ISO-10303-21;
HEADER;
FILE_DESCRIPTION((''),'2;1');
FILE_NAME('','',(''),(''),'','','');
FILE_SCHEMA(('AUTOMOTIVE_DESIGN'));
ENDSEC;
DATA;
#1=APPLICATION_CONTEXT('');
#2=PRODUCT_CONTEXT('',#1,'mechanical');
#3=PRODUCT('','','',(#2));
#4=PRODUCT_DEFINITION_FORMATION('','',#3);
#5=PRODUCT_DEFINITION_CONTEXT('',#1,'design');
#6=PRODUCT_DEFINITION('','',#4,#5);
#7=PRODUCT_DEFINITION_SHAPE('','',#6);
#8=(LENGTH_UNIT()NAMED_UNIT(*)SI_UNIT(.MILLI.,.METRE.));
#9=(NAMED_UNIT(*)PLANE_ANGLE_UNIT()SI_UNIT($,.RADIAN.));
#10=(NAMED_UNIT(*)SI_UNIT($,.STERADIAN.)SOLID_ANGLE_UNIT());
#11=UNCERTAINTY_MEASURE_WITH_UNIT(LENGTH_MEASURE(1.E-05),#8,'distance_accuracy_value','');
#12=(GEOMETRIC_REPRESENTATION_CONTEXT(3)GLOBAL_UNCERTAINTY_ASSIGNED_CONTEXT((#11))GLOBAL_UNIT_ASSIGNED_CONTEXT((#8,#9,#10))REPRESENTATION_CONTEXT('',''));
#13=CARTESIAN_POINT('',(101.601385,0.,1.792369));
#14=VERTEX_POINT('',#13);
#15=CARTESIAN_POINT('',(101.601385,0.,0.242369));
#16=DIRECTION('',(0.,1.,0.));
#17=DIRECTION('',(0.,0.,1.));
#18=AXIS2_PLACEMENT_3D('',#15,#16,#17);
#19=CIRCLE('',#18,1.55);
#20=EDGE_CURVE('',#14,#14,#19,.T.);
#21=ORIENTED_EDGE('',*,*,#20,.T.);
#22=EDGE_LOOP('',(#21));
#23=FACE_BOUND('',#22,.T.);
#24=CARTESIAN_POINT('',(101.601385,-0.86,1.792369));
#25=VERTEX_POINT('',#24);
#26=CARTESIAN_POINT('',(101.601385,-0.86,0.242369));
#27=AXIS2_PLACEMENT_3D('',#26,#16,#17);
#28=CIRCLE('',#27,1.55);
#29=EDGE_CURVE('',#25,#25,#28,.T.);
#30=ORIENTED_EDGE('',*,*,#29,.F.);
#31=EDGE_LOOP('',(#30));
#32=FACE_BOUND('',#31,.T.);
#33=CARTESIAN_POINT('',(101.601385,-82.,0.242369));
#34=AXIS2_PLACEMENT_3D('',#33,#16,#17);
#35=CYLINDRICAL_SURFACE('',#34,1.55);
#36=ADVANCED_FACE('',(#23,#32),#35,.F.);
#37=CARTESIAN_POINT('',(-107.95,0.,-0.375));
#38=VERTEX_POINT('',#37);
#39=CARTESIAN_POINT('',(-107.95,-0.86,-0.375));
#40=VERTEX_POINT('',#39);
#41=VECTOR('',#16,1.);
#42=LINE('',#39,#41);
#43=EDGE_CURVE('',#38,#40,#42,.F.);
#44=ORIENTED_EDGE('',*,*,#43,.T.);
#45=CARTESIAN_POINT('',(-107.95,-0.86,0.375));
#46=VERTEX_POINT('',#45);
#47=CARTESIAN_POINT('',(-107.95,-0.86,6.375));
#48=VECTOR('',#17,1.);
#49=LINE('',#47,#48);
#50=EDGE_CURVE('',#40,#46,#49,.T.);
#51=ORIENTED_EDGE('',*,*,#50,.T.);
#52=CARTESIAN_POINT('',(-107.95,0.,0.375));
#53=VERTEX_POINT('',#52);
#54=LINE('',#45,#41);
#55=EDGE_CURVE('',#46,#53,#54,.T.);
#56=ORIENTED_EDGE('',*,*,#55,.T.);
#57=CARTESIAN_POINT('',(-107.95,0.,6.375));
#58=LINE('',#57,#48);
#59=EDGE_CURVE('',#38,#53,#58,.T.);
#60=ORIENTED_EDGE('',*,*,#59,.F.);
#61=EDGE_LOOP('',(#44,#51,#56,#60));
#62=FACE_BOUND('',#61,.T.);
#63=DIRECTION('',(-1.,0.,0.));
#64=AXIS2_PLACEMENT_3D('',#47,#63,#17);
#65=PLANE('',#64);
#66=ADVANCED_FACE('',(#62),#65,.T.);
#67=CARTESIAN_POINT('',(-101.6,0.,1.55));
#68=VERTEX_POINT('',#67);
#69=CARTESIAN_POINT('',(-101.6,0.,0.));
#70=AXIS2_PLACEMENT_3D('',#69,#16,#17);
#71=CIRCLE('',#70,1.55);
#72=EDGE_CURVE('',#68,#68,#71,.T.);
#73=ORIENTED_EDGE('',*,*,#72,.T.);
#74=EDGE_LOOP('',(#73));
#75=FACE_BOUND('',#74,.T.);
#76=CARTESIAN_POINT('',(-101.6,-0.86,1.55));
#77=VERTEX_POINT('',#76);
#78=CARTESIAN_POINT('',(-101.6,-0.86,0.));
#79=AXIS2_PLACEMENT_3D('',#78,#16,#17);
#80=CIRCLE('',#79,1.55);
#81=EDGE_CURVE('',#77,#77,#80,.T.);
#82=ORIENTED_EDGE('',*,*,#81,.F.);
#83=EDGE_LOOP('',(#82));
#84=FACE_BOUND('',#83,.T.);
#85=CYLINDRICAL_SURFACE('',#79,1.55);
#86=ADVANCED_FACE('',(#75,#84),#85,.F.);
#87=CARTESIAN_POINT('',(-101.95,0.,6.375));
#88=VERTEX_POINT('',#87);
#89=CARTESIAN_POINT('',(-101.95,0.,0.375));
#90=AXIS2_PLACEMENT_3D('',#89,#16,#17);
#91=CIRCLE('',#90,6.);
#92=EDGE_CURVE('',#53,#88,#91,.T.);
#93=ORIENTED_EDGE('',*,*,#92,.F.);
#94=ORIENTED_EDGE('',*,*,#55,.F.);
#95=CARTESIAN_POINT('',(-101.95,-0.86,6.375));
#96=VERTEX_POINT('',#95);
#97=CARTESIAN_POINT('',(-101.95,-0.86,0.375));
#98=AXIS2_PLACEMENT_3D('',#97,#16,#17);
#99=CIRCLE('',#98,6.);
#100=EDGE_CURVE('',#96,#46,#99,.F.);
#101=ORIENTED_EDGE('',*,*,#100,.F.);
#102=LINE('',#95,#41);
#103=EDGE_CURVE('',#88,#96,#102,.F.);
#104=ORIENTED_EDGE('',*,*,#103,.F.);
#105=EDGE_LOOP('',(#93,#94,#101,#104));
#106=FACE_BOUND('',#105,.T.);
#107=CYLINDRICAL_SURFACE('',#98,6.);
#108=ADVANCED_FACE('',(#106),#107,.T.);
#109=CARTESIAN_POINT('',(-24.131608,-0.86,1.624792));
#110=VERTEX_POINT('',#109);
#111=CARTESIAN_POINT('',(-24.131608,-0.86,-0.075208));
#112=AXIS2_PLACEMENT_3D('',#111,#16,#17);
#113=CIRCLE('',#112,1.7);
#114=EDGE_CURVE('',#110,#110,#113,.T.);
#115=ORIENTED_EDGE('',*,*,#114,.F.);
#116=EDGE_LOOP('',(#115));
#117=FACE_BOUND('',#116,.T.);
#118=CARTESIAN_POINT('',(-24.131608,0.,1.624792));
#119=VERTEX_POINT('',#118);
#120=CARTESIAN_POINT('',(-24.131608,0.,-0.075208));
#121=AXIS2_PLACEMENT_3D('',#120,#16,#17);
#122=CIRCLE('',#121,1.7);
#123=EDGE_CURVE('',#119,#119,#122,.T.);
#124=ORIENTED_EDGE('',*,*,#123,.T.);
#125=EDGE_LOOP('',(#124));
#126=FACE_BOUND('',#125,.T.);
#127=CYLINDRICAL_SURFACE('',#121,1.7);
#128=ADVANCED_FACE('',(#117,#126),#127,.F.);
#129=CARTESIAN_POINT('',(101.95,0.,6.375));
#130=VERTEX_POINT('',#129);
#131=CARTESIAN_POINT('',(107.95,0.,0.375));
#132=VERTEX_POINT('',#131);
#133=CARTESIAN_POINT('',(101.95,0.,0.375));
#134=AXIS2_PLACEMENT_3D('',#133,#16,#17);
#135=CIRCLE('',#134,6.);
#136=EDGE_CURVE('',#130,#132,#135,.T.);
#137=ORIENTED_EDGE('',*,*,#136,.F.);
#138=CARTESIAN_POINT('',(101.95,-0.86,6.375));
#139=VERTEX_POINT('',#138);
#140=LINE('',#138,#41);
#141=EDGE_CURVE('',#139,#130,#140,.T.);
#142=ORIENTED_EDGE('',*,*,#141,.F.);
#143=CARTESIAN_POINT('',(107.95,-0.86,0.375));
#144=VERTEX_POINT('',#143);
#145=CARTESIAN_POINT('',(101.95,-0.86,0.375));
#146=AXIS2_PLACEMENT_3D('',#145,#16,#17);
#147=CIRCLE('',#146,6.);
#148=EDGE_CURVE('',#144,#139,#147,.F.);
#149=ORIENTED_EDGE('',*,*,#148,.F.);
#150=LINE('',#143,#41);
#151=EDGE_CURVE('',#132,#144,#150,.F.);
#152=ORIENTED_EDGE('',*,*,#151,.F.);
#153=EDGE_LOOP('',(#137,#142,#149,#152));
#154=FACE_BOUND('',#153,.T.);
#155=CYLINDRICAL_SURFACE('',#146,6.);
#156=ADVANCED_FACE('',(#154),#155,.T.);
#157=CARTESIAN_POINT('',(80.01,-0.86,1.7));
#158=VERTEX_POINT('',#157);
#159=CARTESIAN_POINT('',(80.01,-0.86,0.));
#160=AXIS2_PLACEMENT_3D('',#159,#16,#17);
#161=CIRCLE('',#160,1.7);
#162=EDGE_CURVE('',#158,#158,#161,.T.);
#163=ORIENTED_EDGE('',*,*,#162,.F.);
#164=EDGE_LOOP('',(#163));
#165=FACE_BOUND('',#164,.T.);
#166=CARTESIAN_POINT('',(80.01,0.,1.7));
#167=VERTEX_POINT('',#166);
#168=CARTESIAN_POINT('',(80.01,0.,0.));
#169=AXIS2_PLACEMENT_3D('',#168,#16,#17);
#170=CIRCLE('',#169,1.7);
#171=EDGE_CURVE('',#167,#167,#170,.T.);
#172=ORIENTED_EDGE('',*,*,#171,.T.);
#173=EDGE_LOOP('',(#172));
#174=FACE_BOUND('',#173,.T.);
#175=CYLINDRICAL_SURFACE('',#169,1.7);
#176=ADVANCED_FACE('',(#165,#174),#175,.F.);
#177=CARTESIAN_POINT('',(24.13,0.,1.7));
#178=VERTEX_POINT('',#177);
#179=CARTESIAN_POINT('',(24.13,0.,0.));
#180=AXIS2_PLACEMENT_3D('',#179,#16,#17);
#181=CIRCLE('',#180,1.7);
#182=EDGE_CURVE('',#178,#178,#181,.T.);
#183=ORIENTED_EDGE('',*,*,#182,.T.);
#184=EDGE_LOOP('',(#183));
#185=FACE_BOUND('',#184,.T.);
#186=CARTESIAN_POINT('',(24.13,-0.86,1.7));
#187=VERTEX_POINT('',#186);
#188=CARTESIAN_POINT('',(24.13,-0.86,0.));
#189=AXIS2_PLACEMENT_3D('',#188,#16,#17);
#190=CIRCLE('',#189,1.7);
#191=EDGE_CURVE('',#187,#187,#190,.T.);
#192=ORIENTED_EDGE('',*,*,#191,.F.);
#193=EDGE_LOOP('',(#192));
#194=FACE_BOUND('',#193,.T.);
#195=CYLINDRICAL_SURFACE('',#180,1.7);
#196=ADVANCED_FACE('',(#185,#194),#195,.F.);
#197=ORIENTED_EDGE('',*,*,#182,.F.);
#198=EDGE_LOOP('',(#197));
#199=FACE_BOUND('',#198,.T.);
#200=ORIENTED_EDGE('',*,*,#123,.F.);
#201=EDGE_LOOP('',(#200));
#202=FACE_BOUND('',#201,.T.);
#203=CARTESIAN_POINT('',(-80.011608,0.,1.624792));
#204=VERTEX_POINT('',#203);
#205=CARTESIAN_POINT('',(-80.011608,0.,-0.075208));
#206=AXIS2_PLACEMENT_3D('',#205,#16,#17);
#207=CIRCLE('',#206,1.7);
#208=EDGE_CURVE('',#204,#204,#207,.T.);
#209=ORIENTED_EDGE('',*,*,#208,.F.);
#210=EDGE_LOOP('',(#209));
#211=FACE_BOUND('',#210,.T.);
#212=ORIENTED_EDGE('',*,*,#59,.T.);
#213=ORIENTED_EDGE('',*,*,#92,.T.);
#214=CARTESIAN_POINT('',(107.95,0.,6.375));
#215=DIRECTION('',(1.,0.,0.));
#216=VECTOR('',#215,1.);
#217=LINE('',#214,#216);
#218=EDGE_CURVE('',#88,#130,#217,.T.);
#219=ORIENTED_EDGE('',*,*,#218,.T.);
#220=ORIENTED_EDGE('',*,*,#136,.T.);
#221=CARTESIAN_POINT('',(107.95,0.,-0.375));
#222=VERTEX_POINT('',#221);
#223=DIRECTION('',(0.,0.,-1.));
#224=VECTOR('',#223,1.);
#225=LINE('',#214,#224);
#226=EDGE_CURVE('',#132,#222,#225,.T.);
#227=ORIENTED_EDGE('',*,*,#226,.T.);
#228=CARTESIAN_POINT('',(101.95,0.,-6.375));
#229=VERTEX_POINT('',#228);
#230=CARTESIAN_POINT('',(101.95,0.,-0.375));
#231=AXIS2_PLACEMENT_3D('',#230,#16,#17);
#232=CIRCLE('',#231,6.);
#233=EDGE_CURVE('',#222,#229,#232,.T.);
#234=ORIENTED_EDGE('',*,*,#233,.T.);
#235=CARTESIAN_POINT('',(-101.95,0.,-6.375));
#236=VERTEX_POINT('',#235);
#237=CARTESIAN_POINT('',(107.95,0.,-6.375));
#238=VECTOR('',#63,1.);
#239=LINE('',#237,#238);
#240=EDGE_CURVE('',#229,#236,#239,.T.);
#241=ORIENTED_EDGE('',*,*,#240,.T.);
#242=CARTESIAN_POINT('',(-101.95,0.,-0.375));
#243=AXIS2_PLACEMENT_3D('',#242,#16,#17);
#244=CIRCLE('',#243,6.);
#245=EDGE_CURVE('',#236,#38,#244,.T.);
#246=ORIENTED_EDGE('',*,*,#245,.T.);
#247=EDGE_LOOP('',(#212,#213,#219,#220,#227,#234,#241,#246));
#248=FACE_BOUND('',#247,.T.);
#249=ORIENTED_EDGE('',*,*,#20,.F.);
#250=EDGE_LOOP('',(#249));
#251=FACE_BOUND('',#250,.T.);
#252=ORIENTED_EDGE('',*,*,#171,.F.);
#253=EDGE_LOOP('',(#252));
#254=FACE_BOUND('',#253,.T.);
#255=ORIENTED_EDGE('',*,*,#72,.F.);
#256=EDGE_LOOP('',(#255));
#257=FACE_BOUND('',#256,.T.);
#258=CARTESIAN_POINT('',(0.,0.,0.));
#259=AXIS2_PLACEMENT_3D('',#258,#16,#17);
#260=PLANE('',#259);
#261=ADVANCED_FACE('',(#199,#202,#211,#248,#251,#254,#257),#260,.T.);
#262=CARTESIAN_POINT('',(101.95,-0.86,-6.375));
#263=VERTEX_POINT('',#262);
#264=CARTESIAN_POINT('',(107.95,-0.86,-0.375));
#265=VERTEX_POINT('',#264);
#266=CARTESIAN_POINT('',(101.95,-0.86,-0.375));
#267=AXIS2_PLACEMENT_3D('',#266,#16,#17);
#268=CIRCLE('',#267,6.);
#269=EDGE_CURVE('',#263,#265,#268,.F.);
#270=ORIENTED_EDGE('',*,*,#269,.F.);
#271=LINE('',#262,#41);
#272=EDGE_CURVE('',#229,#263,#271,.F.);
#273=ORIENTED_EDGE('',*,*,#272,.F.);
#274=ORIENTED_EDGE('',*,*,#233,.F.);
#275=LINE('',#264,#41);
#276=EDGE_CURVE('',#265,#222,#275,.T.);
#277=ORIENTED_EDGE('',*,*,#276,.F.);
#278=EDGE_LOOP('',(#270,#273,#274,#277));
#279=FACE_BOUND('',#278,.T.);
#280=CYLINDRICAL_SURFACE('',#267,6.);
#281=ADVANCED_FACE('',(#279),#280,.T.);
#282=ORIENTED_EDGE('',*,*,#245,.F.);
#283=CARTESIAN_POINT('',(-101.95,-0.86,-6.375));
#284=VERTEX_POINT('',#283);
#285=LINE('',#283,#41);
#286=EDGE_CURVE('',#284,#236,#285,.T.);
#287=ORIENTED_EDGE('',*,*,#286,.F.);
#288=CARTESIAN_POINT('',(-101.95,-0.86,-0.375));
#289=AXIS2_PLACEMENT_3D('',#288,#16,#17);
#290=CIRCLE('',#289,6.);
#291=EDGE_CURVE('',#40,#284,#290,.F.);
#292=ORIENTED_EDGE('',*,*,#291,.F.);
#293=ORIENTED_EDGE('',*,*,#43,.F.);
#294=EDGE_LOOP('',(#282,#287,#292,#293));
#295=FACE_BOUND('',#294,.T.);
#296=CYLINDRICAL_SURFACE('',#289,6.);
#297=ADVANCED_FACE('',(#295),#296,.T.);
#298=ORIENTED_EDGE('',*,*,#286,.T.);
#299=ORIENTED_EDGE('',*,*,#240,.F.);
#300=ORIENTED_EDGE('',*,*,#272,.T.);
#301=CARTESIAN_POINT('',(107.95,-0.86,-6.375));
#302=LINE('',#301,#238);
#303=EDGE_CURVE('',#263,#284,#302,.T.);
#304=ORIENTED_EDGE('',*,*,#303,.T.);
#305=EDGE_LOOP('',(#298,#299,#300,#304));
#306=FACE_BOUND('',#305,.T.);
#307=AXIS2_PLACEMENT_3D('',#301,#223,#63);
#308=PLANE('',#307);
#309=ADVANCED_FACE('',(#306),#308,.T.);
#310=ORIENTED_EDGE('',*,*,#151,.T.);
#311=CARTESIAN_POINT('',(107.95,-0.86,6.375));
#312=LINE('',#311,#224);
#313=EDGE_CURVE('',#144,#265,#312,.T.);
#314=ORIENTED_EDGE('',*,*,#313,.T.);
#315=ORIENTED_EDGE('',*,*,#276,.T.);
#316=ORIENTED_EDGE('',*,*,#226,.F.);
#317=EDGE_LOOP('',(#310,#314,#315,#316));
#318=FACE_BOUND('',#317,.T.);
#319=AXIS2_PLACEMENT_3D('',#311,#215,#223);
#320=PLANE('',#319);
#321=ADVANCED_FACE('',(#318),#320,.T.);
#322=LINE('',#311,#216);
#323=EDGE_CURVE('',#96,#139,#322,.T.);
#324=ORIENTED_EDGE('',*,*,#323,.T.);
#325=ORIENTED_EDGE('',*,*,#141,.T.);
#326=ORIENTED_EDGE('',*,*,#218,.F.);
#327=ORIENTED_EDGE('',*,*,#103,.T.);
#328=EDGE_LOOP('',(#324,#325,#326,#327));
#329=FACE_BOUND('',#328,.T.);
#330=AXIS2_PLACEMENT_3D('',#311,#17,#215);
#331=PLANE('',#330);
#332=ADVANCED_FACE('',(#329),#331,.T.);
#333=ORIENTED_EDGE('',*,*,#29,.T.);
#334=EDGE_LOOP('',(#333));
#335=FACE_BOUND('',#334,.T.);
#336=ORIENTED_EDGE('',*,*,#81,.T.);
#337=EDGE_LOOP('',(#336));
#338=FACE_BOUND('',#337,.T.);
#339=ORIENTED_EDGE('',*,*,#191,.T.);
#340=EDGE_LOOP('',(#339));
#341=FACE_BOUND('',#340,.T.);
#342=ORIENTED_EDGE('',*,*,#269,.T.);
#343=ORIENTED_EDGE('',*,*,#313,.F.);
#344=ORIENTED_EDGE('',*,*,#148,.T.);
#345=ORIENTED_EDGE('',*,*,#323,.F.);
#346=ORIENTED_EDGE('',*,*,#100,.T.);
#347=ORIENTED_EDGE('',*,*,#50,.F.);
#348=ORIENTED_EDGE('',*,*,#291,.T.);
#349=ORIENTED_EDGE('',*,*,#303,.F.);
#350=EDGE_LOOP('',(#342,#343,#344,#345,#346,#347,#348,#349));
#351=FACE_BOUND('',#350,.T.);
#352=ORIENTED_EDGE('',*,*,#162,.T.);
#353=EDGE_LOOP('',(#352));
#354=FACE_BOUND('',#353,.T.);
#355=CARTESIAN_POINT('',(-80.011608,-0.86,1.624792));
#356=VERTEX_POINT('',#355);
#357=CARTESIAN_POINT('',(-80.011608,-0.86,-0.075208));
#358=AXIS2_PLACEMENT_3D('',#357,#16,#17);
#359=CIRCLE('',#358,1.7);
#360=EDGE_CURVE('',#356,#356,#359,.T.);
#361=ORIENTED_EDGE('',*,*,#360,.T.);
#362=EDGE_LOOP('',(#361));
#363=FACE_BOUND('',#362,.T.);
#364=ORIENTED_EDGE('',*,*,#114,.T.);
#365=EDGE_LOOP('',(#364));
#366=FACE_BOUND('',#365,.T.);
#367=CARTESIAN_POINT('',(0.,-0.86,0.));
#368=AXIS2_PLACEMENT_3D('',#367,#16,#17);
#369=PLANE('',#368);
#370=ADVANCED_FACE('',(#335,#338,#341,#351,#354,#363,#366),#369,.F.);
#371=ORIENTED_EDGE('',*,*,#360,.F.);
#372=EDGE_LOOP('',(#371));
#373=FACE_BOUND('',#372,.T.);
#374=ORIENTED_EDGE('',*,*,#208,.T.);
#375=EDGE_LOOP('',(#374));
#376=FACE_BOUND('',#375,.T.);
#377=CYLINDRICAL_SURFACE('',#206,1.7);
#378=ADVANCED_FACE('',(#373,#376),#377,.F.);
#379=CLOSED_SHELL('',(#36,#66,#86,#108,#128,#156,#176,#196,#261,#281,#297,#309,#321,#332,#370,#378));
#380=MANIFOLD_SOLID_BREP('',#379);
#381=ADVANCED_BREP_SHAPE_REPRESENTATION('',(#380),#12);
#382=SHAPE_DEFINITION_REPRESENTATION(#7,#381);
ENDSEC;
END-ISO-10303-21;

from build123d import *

# Parameters (mm, degrees)
SKETCH1_W                = 215.9
SKETCH1_H                = 12.75
SKETCH1_R                = 1.55
BASE_FLANGE1_DEPTH       = 0.86
FILLET1_R                = 6
M3_CLEARANCE_HOLE1_D     = 3.4
M3_CLEARANCE_HOLE1_DEPTH = 1.29
M3_CLEARANCE_HOLE1_TIP   = 1.021463052
SKETCH14_R               = 1.55
CUT_EXTRUDE1_DEPTH       = 82


# Sheet-metal steps are written as plain solids
with BuildPart() as part:
    # Sketch1 → Base-Flange1 (new body)
    with BuildSketch(Plane(origin=(0, 0, 0), x_dir=(1, 0, 0), z_dir=(0, 1, 0))):
        Rectangle(SKETCH1_W, SKETCH1_H)
        with Locations(Location((-101.6, 0, 0), (0, 0, 270))):
            Circle(SKETCH1_R, mode=Mode.SUBTRACT)
    extrude(amount=-BASE_FLANGE1_DEPTH)

    # Fillet1
    fillet1_edges = [part.edges().sort_by_distance(p)[0] for p in [
        (-107.95, -0.43, -6.375),
        (107.95, -0.43, -6.375),
        (107.95, -0.43, 6.375),
        (-107.95, -0.43, 6.375),
    ]]
    fillet(fillet1_edges, radius=FILLET1_R)

    # M3 Clearance Hole1
    with Locations(Plane(origin=(0, 0, 0), x_dir=(1, 0, 0), z_dir=(0, 1, 0))):
        with Locations((-80.011608413, 0.075207541), (-24.131608413, 0.075207541), (80.01, 0), (24.13, 0)):
            Hole(M3_CLEARANCE_HOLE1_D / 2, depth=M3_CLEARANCE_HOLE1_DEPTH)
            with Locations((0, 0, -(M3_CLEARANCE_HOLE1_DEPTH + M3_CLEARANCE_HOLE1_TIP / 2))):  # 118° drill point
                Cone(0, M3_CLEARANCE_HOLE1_D / 2, M3_CLEARANCE_HOLE1_TIP, mode=Mode.SUBTRACT)

    # Sketch14 → Cut-Extrude1 (cut)
    with BuildSketch(Plane(origin=(0, 0, 0), x_dir=(1, 0, 0), z_dir=(0, 1, 0))):
        with Locations(Location((101.601385273, -0.242368773, 0), (0, 0, 270))):
            Circle(SKETCH14_R)
    extrude(amount=-CUT_EXTRUDE1_DEPTH, mode=Mode.SUBTRACT)


solid = part.part
